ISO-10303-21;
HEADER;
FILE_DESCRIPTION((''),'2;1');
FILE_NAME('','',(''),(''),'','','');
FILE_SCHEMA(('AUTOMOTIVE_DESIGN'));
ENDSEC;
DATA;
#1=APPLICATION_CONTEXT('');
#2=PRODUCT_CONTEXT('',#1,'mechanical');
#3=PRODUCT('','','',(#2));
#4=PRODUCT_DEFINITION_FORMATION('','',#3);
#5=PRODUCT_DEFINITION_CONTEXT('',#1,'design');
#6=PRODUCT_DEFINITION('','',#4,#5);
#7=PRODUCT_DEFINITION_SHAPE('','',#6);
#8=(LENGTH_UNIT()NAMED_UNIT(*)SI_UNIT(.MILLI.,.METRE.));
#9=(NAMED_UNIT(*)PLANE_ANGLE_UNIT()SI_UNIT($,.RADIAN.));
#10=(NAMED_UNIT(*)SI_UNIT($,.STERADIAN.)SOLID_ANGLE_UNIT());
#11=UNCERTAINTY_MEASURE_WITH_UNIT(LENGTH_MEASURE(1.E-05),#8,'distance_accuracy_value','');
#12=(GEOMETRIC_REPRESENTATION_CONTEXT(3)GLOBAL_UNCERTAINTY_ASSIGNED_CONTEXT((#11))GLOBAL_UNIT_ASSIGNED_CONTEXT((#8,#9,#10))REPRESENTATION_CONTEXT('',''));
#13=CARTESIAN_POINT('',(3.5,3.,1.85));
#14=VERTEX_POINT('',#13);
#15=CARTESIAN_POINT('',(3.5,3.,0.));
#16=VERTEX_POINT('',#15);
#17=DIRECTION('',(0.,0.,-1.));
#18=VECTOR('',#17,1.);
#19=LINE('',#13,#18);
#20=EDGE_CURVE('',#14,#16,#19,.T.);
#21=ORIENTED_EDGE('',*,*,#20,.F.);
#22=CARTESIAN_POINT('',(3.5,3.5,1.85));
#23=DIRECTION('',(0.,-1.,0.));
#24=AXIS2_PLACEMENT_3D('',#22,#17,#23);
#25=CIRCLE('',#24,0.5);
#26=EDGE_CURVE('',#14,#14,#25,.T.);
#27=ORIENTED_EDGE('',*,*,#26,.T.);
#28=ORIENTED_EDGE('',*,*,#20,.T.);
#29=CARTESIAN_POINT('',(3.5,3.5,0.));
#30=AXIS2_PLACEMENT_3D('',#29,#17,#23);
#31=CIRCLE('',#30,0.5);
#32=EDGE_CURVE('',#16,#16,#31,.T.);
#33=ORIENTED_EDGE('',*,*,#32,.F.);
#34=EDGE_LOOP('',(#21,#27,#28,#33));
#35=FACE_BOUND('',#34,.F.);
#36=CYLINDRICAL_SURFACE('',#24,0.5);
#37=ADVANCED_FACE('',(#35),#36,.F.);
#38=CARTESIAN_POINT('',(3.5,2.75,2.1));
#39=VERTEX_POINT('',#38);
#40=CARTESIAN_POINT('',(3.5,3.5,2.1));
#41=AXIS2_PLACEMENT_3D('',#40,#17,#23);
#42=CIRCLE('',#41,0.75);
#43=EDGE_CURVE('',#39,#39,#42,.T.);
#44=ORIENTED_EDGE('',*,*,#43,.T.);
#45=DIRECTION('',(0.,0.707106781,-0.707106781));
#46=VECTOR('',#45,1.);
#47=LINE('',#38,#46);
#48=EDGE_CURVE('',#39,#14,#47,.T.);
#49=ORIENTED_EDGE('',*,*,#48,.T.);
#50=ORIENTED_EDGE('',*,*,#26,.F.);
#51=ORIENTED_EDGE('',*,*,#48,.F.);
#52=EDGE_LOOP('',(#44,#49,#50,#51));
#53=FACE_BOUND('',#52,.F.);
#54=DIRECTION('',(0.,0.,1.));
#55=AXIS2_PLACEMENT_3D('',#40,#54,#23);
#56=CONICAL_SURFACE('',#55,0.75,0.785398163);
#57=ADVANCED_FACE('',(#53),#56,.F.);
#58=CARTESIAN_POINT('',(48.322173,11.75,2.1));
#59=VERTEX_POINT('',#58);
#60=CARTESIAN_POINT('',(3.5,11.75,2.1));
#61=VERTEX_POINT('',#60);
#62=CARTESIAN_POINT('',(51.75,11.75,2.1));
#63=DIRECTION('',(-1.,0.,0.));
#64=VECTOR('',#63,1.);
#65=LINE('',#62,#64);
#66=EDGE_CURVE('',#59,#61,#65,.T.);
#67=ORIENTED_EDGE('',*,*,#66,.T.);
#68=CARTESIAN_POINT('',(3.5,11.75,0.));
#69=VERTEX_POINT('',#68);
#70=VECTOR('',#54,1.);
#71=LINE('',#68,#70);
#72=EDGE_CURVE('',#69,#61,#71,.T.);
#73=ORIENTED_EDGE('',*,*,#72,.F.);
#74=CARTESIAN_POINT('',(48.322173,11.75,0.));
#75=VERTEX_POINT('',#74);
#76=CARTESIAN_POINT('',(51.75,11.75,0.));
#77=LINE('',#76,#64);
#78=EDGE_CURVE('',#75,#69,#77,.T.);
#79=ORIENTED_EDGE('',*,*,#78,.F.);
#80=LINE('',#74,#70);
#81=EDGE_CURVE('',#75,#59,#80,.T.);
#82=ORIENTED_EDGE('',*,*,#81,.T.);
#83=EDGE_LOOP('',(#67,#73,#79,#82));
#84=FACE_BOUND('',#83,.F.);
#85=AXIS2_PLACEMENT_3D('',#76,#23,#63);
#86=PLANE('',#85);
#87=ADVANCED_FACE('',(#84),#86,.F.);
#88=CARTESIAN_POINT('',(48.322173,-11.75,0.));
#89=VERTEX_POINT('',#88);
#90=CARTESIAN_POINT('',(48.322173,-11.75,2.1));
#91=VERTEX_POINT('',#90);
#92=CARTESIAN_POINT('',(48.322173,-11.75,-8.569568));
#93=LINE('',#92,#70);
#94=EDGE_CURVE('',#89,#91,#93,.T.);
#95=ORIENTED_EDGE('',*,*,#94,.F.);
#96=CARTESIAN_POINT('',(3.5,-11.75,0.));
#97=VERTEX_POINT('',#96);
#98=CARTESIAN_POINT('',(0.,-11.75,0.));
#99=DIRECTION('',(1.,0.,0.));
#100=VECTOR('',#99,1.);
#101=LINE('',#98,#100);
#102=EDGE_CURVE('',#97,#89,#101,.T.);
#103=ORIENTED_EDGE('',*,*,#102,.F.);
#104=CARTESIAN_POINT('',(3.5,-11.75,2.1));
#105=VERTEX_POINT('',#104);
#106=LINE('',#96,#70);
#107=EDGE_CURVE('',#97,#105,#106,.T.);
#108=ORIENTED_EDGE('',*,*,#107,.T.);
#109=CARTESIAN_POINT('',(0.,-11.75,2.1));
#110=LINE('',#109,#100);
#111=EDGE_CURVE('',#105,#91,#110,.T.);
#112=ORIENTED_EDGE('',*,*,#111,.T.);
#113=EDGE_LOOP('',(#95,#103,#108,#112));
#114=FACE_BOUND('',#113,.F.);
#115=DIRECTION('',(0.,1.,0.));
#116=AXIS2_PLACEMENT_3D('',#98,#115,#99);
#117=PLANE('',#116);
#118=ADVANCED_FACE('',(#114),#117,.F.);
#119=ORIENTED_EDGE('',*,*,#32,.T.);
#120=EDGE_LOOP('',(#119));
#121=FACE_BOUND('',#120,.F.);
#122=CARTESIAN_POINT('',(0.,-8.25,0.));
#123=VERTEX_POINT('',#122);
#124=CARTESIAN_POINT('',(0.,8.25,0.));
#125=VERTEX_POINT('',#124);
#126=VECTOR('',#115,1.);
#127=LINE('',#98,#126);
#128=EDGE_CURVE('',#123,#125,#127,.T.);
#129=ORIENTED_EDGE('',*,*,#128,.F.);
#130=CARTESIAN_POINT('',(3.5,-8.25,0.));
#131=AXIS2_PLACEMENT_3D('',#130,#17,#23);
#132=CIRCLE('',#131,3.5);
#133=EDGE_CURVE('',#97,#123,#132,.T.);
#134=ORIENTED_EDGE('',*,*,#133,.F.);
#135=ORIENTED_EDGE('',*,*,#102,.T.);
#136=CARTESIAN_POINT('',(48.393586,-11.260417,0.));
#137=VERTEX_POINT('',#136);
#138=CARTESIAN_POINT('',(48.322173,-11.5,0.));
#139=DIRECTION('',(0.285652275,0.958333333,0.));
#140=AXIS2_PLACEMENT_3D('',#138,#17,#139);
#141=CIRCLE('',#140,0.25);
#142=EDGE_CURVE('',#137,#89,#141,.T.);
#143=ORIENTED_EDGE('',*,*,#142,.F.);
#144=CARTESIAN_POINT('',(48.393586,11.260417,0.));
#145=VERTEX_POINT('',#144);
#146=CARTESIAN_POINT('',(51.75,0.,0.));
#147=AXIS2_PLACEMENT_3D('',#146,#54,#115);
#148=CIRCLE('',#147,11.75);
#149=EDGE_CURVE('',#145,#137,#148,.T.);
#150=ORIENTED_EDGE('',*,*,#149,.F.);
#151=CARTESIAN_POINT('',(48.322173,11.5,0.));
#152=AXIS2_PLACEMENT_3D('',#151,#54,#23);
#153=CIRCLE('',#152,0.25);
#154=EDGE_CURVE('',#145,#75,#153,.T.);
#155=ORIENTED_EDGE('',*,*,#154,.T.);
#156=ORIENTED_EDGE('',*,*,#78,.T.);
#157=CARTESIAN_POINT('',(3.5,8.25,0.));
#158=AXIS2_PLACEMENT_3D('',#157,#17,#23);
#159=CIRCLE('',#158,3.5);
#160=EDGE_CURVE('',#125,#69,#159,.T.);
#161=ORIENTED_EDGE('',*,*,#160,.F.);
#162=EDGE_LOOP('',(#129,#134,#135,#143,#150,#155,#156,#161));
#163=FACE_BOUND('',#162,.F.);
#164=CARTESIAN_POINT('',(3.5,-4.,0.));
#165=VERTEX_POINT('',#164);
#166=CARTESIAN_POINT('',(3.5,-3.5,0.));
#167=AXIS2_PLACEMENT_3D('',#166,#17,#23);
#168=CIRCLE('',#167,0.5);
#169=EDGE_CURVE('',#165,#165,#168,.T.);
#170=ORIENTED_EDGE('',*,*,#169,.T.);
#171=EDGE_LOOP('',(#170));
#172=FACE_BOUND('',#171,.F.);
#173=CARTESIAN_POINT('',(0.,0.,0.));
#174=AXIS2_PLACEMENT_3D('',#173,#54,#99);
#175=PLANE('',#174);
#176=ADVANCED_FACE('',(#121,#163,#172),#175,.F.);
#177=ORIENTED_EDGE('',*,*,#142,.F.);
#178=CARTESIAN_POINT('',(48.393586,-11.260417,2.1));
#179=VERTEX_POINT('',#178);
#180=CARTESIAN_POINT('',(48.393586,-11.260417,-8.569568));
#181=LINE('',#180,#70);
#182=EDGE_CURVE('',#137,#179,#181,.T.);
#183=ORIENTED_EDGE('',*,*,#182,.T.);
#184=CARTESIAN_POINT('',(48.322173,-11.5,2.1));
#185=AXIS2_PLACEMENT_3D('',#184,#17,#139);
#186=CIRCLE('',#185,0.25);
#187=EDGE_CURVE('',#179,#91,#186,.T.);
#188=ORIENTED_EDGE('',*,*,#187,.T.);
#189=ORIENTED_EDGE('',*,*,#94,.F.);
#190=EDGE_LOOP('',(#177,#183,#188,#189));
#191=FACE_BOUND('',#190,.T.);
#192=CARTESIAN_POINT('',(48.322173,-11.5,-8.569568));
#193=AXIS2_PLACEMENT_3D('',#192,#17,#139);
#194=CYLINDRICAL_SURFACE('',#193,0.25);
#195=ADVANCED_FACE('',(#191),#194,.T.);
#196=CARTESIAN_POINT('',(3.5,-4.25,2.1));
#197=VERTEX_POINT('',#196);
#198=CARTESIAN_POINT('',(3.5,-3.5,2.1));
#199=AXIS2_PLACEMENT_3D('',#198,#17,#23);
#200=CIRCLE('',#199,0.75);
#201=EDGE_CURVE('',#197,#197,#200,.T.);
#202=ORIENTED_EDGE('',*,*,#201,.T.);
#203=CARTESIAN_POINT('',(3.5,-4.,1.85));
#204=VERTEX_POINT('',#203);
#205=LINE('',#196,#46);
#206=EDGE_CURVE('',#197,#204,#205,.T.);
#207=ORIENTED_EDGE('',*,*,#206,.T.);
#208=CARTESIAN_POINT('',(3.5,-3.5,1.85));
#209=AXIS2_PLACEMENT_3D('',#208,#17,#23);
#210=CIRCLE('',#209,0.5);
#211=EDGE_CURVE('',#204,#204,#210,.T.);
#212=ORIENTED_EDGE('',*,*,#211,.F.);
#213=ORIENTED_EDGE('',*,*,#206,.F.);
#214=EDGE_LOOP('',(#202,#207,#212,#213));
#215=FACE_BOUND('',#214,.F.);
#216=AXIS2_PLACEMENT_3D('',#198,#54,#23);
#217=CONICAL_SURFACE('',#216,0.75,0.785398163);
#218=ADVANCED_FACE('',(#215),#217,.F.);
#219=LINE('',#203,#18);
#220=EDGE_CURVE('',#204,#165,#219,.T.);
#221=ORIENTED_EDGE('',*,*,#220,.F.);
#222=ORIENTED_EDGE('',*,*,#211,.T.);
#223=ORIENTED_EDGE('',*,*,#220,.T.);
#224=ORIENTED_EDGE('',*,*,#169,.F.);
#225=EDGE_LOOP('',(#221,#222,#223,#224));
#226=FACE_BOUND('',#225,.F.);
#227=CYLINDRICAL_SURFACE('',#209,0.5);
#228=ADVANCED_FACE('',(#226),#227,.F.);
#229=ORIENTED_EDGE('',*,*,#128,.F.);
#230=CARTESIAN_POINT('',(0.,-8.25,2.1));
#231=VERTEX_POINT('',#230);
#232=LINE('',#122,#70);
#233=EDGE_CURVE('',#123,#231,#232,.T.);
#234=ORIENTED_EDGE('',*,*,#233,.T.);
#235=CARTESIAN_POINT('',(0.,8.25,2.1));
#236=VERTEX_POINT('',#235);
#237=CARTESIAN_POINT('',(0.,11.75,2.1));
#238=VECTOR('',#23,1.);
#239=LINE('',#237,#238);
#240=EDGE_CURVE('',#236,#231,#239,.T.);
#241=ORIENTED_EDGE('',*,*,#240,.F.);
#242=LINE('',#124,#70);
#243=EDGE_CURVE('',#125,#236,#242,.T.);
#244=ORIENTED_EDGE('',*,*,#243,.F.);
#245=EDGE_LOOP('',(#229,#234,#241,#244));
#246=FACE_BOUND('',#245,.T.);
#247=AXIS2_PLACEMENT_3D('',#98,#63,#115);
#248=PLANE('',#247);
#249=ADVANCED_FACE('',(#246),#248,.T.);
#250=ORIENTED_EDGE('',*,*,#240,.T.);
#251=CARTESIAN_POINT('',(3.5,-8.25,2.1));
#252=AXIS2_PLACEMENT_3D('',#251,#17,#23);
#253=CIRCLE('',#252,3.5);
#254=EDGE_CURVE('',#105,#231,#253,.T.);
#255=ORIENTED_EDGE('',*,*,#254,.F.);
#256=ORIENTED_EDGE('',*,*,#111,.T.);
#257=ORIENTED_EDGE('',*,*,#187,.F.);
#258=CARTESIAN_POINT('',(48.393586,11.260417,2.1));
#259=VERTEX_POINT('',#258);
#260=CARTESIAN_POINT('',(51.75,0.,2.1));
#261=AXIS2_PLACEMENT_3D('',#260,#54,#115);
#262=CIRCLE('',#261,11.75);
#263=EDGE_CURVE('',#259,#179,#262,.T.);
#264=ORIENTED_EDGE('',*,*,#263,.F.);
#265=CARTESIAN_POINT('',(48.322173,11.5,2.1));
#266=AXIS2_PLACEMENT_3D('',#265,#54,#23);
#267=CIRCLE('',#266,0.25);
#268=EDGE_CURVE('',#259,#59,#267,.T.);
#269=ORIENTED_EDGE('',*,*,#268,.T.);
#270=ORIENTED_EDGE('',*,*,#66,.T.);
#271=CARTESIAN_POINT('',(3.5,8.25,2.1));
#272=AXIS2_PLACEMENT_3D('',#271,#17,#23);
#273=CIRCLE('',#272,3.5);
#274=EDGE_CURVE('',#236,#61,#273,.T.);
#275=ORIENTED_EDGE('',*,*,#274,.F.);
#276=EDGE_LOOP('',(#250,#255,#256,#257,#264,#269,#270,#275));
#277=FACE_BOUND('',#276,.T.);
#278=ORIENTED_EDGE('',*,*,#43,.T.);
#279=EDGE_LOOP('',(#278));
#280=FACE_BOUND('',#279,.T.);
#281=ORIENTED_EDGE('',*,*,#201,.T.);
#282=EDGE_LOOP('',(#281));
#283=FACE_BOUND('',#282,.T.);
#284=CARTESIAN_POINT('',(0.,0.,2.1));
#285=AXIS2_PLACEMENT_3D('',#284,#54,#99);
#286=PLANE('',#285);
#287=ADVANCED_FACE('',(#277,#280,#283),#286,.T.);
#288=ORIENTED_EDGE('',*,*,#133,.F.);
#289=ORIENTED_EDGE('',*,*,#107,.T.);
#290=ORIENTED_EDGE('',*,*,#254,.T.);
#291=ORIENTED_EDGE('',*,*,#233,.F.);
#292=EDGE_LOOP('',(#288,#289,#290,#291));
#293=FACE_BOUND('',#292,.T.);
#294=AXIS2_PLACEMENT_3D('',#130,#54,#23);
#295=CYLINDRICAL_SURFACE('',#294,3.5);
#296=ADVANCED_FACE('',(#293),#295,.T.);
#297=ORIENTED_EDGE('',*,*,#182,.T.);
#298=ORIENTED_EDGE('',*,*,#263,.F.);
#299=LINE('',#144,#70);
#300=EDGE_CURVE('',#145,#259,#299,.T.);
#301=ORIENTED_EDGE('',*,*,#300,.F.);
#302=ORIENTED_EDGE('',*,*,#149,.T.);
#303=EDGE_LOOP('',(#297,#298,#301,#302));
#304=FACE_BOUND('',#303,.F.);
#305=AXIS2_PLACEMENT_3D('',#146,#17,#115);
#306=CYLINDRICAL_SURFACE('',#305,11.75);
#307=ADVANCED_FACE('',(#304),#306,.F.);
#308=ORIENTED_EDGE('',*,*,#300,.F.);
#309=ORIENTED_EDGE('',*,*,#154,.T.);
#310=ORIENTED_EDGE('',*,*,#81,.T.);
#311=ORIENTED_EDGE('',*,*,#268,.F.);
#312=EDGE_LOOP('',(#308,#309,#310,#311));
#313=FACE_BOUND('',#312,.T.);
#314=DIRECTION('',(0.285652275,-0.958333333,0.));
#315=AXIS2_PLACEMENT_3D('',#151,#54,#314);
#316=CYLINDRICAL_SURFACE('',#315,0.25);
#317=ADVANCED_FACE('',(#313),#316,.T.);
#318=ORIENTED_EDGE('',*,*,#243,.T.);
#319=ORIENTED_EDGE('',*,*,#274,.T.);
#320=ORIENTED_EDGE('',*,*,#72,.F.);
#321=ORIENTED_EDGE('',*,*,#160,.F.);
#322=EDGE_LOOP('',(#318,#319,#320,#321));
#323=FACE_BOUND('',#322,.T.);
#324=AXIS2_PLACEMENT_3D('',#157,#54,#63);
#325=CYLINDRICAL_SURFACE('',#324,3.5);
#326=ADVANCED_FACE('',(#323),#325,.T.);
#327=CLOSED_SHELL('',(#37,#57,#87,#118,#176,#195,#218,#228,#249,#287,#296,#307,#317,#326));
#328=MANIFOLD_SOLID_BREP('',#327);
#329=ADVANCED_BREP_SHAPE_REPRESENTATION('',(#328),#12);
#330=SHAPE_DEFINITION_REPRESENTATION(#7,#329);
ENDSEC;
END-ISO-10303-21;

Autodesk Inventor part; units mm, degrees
ref_plane "YZ Plane" through (0, 0, 0) normal (1, 0, 0) x (0, 1, 0)
ref_plane "XZ Plane" through (0, 0, 0) normal (0, 1, 0) x (-1, 0, 0)
ref_plane "XY Plane" through (0, 0, 0) normal (0, 0, 1) x (1, 0, 0)
sketch "Эскиз1" plane through (0, 0, 0) normal (0, 0, 1) x (1, 0, 0)
  line L0 (51.75, 11.75) -> (0, 11.75)
  line L1 (0, -11.75) -> (51.75, -11.75)
  arc A0 (51.75, 11.75) -> (51.75, -11.75) centre (51.75, 0) ccw
  line L2 (0, -11.75) -> (0, 11.75)
  line L3 (0, 0) -> (40, 0) construction
  line L4 (0, 0) -> (0, 11.75) construction
  line L5 (0, 11.75) -> (0, 11.25)
  point P0 (20, 0)
  dimension "d0" = 11.75
  dimension "d47" = 40
extrude "Выдавливание3" add sketch "Эскиз1" along normal blind 2.1
fillet "Сопряжение3" radius 0.25 2 edges at (51.75, 11.75, 1.05) (51.75, -11.75, 1.05)
fillet "Сопряжение4" radius 3.5 2 edges at (0, -11.75, 1.05) (0, 11.75, 1.05)
sketch "Эскиз6" plane through (0, 0, 2.1) normal (0, 0, 1) x (1, 0, 0)
  arc A0 (48.3936, 11.2604) -> (48.3936, -11.2604) centre (51.75, 0) ccw construction
  line L0 (40, 0) -> (0, 0) construction
  line L1 (0, -11.75) -> (0, 11.75) construction
  circle A1 centre (3.5, 3.5) radius 0.5
  line L2 (3.5, 3.5) -> (0, 3.5) construction
  line L3 (3.5, 3.5) -> (3.5, 0) construction
  circle A2 centre (3.5, -3.5) radius 0.5
  point P0 (48.3222, -11.75)
  dimension "d58" = 1
  dimension "d59" = 3.5
hole "Отверстие1" at (3.5, -3.5, 2.1) at (3.5, 3.5, 2.1) direction (0, 0, -1) diameter 1 end through all countersink diameter 1.5 countersink angle 90
properties part number "Поршень"
